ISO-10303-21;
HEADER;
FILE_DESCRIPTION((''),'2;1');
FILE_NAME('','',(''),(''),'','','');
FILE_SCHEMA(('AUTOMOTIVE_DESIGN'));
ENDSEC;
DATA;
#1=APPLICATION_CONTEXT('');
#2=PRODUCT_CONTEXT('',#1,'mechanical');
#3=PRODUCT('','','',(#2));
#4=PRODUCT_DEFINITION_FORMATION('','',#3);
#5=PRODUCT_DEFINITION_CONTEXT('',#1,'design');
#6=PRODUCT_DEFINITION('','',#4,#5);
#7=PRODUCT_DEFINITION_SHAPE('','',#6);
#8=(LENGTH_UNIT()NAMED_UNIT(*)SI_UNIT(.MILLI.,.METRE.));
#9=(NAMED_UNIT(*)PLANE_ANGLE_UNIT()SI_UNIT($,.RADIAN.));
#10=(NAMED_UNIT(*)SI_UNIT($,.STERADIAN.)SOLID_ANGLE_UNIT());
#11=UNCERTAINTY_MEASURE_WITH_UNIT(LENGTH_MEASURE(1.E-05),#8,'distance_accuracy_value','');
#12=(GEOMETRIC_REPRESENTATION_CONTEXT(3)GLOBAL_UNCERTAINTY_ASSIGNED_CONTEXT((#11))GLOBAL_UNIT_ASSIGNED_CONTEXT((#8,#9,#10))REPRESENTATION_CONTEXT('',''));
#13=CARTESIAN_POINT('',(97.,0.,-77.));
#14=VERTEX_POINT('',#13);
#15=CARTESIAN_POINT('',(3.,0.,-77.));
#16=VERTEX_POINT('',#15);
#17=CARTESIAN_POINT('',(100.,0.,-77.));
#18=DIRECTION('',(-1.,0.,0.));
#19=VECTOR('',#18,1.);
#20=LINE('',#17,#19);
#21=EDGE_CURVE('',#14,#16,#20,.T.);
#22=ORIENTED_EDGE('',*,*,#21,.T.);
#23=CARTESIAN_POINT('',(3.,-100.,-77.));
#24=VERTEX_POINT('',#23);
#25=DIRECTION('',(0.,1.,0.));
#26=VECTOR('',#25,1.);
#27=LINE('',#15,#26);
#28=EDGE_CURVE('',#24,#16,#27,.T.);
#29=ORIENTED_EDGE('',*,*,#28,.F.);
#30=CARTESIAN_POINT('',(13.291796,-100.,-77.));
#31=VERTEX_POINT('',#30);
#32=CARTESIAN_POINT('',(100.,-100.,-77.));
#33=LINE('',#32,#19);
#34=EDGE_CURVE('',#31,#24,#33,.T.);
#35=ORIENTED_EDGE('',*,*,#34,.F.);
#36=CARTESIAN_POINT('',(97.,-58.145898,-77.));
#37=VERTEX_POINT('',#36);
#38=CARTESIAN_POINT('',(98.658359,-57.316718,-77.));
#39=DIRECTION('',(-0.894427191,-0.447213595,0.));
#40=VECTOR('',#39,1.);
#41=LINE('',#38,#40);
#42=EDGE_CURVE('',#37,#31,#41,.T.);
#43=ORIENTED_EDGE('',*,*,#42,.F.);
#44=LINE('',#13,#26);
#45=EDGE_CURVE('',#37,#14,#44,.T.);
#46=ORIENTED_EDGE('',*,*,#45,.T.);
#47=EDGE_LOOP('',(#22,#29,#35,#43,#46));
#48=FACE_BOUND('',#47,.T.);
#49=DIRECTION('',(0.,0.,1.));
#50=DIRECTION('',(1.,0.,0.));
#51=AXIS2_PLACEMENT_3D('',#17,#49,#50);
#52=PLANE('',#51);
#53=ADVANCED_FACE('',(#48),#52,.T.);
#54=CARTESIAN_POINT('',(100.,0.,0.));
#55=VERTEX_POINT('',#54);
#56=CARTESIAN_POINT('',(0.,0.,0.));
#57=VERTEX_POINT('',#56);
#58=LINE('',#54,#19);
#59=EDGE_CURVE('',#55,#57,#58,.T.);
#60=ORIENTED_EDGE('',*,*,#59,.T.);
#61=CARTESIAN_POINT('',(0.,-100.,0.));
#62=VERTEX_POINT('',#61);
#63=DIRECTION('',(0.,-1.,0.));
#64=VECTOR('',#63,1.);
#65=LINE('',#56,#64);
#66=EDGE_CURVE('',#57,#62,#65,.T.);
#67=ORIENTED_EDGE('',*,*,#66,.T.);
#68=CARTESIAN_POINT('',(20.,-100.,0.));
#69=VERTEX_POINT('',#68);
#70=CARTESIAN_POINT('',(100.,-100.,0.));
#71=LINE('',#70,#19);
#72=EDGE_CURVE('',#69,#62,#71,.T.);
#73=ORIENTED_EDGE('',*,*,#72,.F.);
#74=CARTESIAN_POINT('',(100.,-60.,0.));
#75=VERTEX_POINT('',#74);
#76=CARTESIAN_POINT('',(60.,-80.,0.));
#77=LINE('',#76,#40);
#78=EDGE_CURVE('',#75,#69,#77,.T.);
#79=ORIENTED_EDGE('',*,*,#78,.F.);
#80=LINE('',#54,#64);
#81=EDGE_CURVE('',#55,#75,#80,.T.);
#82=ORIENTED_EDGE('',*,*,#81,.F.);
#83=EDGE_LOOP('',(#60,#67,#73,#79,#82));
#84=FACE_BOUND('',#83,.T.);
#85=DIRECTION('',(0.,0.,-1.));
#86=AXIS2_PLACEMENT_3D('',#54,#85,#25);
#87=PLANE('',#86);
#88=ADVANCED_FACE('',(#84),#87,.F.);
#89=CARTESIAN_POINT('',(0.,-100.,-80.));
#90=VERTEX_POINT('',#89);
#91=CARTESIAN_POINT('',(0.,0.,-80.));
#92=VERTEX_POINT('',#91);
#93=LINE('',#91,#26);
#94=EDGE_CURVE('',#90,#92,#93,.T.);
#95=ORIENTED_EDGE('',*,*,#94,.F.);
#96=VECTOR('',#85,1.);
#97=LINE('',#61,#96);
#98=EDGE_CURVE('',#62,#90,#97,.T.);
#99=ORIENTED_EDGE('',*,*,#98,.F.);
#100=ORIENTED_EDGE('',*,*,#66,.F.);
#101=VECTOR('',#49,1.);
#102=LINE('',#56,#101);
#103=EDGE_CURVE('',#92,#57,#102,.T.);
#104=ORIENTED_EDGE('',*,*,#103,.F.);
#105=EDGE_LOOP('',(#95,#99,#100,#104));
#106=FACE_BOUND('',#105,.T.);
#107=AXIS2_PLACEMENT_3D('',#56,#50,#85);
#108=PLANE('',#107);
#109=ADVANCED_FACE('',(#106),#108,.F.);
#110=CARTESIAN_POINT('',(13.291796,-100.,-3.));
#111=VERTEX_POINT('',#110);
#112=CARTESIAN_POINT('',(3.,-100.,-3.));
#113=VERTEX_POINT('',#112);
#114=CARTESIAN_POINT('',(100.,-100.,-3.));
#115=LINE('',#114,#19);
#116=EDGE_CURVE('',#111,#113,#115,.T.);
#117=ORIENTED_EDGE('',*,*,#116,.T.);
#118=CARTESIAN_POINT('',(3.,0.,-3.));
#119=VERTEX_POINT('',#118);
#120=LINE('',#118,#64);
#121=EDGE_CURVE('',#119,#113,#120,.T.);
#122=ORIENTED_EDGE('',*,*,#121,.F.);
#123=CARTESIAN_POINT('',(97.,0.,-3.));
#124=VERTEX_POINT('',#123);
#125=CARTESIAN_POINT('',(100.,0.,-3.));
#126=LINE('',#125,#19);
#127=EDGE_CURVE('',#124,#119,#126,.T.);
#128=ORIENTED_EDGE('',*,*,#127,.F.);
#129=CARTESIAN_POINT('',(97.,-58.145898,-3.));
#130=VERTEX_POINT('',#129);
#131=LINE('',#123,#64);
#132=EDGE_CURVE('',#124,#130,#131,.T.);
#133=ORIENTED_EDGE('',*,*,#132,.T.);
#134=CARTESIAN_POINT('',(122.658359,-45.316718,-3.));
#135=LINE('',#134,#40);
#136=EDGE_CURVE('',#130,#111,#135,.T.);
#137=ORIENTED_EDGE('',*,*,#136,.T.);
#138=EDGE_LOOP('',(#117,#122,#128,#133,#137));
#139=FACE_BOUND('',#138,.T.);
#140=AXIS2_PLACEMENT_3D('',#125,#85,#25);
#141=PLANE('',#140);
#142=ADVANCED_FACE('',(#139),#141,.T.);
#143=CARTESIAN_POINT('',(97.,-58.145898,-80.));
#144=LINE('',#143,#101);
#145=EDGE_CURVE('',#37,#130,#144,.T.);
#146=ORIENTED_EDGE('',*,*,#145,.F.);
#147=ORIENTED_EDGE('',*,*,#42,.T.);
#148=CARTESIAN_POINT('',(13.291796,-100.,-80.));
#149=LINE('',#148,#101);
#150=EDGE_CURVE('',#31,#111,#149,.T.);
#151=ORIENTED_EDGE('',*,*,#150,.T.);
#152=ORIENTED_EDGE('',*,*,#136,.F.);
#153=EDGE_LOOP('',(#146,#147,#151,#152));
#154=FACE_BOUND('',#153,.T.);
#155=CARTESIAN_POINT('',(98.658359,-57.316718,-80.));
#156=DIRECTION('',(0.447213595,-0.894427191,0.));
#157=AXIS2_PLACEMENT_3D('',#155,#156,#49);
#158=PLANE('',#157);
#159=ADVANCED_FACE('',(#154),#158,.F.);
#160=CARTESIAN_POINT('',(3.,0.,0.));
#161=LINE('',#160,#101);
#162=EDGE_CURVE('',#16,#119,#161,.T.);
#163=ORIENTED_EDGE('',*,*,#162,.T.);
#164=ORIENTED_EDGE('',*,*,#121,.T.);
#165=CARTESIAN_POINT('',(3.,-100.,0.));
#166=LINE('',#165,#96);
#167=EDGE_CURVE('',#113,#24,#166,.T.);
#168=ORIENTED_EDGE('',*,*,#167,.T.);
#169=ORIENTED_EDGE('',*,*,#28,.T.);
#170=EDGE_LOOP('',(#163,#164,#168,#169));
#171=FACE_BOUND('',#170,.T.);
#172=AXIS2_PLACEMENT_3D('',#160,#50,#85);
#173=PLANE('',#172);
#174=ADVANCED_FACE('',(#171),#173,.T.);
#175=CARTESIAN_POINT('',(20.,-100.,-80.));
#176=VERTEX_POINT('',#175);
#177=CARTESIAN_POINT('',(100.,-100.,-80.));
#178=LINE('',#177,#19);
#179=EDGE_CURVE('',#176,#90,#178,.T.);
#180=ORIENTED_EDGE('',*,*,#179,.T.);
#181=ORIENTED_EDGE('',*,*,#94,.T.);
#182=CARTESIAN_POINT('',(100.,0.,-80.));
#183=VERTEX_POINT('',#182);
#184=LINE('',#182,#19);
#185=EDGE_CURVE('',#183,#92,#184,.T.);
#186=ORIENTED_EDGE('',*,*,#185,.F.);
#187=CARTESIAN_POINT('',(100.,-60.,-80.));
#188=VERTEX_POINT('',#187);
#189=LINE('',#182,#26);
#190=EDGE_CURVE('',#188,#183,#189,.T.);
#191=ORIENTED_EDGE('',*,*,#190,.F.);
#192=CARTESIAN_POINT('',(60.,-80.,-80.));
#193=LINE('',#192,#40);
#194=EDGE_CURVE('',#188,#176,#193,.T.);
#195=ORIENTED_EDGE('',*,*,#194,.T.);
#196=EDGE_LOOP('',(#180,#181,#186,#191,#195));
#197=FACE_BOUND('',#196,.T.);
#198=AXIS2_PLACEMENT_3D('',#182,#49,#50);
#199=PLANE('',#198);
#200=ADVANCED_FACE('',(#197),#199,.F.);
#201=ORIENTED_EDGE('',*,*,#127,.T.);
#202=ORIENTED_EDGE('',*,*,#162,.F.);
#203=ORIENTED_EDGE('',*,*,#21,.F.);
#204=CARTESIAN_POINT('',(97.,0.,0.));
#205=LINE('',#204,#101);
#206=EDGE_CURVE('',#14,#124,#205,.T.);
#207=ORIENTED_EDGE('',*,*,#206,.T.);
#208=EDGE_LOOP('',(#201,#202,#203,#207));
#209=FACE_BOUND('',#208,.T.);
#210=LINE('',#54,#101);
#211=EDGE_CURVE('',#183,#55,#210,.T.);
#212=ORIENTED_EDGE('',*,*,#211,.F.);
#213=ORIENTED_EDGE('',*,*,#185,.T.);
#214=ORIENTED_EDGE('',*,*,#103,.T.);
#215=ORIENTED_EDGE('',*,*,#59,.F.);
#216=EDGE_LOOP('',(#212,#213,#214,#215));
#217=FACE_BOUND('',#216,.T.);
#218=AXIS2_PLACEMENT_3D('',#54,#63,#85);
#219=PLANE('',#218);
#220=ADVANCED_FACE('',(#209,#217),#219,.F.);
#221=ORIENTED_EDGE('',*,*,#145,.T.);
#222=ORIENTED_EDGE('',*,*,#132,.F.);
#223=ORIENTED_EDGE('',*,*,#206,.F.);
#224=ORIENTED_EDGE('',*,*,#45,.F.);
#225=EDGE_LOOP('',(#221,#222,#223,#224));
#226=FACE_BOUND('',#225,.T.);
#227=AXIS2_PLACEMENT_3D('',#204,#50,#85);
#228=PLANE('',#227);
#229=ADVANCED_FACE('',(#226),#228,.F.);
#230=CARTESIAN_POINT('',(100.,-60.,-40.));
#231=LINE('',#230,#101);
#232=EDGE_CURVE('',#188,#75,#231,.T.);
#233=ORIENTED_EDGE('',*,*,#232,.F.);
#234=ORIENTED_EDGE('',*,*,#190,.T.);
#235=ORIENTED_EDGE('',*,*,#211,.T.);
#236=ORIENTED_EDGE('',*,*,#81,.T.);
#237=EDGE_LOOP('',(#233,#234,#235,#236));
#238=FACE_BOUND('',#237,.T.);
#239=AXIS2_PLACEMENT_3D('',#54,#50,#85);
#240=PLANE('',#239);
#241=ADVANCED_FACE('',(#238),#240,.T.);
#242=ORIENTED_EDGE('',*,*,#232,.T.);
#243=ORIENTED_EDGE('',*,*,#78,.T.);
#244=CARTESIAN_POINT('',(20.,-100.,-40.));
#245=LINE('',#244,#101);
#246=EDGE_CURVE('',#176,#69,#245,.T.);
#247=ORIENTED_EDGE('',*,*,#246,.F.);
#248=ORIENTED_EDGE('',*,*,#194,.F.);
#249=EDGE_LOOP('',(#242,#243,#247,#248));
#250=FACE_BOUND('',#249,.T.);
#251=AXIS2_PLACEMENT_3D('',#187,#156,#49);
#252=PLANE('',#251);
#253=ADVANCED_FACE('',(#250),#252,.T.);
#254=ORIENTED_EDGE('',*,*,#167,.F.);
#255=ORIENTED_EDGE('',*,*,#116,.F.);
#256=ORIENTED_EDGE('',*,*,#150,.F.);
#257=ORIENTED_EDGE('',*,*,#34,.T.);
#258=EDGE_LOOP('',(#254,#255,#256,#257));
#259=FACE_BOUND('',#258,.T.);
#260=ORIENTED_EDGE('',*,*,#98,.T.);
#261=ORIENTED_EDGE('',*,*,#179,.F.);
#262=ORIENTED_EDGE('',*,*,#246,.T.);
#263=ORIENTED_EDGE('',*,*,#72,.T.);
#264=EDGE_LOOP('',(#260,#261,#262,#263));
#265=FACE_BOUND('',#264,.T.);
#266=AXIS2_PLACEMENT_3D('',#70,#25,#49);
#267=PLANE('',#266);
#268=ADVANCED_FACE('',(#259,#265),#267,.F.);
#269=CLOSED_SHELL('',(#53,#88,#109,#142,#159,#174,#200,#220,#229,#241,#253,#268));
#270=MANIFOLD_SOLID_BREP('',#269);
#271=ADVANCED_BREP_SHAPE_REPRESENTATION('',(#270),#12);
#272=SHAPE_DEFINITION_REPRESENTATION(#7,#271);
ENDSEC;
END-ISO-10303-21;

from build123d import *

# Parameters (mm, degrees)
SKETCH_2_W        = 80
SKETCH_2_H        = 100
EXTRUDE_1_DEPTH   = 100
OTHER_START       = 98.38699101
OTHER_1_OUTLINE_W = 92
OTHER_1_OUTLINE_H = 80
OTHER_1_DEPTH     = 35.77708764
SHELL_3_T         = -3


with BuildPart() as part:
    # 草图2 → 凸台-拉伸1 (new body)
    with BuildSketch(Plane(origin=(0, 0, 0), x_dir=(0, 0, -1), z_dir=(1, 0, 0))):
        with Locations((40, -50)):
            Rectangle(SKETCH_2_W, SKETCH_2_H)
    extrude(amount=EXTRUDE_1_DEPTH)

    # 边界-切除1: read off the stored shape, not the designer's step
    # 边界-切除1 outline → 边界-切除1 (cut)
    with BuildSketch(Plane(origin=(0, 0, 0), x_dir=(0.8944271909999159, 0.44721359549995804, 0), z_dir=(0.447213595499958, -0.894427190999916, 0)).offset(OTHER_START)):
        with Locations((18, -40)):
            Rectangle(OTHER_1_OUTLINE_W, OTHER_1_OUTLINE_H)
    extrude(amount=OTHER_1_DEPTH, mode=Mode.SUBTRACT)

    # 抽壳3
    shell_3_openings = [part.faces().sort_by_distance(p)[0] for p in [
        (10, -100, -40),
        (50, 0, -40),
    ]]
    offset(amount=SHELL_3_T, openings=shell_3_openings, kind=Kind.INTERSECTION)


solid = part.part
